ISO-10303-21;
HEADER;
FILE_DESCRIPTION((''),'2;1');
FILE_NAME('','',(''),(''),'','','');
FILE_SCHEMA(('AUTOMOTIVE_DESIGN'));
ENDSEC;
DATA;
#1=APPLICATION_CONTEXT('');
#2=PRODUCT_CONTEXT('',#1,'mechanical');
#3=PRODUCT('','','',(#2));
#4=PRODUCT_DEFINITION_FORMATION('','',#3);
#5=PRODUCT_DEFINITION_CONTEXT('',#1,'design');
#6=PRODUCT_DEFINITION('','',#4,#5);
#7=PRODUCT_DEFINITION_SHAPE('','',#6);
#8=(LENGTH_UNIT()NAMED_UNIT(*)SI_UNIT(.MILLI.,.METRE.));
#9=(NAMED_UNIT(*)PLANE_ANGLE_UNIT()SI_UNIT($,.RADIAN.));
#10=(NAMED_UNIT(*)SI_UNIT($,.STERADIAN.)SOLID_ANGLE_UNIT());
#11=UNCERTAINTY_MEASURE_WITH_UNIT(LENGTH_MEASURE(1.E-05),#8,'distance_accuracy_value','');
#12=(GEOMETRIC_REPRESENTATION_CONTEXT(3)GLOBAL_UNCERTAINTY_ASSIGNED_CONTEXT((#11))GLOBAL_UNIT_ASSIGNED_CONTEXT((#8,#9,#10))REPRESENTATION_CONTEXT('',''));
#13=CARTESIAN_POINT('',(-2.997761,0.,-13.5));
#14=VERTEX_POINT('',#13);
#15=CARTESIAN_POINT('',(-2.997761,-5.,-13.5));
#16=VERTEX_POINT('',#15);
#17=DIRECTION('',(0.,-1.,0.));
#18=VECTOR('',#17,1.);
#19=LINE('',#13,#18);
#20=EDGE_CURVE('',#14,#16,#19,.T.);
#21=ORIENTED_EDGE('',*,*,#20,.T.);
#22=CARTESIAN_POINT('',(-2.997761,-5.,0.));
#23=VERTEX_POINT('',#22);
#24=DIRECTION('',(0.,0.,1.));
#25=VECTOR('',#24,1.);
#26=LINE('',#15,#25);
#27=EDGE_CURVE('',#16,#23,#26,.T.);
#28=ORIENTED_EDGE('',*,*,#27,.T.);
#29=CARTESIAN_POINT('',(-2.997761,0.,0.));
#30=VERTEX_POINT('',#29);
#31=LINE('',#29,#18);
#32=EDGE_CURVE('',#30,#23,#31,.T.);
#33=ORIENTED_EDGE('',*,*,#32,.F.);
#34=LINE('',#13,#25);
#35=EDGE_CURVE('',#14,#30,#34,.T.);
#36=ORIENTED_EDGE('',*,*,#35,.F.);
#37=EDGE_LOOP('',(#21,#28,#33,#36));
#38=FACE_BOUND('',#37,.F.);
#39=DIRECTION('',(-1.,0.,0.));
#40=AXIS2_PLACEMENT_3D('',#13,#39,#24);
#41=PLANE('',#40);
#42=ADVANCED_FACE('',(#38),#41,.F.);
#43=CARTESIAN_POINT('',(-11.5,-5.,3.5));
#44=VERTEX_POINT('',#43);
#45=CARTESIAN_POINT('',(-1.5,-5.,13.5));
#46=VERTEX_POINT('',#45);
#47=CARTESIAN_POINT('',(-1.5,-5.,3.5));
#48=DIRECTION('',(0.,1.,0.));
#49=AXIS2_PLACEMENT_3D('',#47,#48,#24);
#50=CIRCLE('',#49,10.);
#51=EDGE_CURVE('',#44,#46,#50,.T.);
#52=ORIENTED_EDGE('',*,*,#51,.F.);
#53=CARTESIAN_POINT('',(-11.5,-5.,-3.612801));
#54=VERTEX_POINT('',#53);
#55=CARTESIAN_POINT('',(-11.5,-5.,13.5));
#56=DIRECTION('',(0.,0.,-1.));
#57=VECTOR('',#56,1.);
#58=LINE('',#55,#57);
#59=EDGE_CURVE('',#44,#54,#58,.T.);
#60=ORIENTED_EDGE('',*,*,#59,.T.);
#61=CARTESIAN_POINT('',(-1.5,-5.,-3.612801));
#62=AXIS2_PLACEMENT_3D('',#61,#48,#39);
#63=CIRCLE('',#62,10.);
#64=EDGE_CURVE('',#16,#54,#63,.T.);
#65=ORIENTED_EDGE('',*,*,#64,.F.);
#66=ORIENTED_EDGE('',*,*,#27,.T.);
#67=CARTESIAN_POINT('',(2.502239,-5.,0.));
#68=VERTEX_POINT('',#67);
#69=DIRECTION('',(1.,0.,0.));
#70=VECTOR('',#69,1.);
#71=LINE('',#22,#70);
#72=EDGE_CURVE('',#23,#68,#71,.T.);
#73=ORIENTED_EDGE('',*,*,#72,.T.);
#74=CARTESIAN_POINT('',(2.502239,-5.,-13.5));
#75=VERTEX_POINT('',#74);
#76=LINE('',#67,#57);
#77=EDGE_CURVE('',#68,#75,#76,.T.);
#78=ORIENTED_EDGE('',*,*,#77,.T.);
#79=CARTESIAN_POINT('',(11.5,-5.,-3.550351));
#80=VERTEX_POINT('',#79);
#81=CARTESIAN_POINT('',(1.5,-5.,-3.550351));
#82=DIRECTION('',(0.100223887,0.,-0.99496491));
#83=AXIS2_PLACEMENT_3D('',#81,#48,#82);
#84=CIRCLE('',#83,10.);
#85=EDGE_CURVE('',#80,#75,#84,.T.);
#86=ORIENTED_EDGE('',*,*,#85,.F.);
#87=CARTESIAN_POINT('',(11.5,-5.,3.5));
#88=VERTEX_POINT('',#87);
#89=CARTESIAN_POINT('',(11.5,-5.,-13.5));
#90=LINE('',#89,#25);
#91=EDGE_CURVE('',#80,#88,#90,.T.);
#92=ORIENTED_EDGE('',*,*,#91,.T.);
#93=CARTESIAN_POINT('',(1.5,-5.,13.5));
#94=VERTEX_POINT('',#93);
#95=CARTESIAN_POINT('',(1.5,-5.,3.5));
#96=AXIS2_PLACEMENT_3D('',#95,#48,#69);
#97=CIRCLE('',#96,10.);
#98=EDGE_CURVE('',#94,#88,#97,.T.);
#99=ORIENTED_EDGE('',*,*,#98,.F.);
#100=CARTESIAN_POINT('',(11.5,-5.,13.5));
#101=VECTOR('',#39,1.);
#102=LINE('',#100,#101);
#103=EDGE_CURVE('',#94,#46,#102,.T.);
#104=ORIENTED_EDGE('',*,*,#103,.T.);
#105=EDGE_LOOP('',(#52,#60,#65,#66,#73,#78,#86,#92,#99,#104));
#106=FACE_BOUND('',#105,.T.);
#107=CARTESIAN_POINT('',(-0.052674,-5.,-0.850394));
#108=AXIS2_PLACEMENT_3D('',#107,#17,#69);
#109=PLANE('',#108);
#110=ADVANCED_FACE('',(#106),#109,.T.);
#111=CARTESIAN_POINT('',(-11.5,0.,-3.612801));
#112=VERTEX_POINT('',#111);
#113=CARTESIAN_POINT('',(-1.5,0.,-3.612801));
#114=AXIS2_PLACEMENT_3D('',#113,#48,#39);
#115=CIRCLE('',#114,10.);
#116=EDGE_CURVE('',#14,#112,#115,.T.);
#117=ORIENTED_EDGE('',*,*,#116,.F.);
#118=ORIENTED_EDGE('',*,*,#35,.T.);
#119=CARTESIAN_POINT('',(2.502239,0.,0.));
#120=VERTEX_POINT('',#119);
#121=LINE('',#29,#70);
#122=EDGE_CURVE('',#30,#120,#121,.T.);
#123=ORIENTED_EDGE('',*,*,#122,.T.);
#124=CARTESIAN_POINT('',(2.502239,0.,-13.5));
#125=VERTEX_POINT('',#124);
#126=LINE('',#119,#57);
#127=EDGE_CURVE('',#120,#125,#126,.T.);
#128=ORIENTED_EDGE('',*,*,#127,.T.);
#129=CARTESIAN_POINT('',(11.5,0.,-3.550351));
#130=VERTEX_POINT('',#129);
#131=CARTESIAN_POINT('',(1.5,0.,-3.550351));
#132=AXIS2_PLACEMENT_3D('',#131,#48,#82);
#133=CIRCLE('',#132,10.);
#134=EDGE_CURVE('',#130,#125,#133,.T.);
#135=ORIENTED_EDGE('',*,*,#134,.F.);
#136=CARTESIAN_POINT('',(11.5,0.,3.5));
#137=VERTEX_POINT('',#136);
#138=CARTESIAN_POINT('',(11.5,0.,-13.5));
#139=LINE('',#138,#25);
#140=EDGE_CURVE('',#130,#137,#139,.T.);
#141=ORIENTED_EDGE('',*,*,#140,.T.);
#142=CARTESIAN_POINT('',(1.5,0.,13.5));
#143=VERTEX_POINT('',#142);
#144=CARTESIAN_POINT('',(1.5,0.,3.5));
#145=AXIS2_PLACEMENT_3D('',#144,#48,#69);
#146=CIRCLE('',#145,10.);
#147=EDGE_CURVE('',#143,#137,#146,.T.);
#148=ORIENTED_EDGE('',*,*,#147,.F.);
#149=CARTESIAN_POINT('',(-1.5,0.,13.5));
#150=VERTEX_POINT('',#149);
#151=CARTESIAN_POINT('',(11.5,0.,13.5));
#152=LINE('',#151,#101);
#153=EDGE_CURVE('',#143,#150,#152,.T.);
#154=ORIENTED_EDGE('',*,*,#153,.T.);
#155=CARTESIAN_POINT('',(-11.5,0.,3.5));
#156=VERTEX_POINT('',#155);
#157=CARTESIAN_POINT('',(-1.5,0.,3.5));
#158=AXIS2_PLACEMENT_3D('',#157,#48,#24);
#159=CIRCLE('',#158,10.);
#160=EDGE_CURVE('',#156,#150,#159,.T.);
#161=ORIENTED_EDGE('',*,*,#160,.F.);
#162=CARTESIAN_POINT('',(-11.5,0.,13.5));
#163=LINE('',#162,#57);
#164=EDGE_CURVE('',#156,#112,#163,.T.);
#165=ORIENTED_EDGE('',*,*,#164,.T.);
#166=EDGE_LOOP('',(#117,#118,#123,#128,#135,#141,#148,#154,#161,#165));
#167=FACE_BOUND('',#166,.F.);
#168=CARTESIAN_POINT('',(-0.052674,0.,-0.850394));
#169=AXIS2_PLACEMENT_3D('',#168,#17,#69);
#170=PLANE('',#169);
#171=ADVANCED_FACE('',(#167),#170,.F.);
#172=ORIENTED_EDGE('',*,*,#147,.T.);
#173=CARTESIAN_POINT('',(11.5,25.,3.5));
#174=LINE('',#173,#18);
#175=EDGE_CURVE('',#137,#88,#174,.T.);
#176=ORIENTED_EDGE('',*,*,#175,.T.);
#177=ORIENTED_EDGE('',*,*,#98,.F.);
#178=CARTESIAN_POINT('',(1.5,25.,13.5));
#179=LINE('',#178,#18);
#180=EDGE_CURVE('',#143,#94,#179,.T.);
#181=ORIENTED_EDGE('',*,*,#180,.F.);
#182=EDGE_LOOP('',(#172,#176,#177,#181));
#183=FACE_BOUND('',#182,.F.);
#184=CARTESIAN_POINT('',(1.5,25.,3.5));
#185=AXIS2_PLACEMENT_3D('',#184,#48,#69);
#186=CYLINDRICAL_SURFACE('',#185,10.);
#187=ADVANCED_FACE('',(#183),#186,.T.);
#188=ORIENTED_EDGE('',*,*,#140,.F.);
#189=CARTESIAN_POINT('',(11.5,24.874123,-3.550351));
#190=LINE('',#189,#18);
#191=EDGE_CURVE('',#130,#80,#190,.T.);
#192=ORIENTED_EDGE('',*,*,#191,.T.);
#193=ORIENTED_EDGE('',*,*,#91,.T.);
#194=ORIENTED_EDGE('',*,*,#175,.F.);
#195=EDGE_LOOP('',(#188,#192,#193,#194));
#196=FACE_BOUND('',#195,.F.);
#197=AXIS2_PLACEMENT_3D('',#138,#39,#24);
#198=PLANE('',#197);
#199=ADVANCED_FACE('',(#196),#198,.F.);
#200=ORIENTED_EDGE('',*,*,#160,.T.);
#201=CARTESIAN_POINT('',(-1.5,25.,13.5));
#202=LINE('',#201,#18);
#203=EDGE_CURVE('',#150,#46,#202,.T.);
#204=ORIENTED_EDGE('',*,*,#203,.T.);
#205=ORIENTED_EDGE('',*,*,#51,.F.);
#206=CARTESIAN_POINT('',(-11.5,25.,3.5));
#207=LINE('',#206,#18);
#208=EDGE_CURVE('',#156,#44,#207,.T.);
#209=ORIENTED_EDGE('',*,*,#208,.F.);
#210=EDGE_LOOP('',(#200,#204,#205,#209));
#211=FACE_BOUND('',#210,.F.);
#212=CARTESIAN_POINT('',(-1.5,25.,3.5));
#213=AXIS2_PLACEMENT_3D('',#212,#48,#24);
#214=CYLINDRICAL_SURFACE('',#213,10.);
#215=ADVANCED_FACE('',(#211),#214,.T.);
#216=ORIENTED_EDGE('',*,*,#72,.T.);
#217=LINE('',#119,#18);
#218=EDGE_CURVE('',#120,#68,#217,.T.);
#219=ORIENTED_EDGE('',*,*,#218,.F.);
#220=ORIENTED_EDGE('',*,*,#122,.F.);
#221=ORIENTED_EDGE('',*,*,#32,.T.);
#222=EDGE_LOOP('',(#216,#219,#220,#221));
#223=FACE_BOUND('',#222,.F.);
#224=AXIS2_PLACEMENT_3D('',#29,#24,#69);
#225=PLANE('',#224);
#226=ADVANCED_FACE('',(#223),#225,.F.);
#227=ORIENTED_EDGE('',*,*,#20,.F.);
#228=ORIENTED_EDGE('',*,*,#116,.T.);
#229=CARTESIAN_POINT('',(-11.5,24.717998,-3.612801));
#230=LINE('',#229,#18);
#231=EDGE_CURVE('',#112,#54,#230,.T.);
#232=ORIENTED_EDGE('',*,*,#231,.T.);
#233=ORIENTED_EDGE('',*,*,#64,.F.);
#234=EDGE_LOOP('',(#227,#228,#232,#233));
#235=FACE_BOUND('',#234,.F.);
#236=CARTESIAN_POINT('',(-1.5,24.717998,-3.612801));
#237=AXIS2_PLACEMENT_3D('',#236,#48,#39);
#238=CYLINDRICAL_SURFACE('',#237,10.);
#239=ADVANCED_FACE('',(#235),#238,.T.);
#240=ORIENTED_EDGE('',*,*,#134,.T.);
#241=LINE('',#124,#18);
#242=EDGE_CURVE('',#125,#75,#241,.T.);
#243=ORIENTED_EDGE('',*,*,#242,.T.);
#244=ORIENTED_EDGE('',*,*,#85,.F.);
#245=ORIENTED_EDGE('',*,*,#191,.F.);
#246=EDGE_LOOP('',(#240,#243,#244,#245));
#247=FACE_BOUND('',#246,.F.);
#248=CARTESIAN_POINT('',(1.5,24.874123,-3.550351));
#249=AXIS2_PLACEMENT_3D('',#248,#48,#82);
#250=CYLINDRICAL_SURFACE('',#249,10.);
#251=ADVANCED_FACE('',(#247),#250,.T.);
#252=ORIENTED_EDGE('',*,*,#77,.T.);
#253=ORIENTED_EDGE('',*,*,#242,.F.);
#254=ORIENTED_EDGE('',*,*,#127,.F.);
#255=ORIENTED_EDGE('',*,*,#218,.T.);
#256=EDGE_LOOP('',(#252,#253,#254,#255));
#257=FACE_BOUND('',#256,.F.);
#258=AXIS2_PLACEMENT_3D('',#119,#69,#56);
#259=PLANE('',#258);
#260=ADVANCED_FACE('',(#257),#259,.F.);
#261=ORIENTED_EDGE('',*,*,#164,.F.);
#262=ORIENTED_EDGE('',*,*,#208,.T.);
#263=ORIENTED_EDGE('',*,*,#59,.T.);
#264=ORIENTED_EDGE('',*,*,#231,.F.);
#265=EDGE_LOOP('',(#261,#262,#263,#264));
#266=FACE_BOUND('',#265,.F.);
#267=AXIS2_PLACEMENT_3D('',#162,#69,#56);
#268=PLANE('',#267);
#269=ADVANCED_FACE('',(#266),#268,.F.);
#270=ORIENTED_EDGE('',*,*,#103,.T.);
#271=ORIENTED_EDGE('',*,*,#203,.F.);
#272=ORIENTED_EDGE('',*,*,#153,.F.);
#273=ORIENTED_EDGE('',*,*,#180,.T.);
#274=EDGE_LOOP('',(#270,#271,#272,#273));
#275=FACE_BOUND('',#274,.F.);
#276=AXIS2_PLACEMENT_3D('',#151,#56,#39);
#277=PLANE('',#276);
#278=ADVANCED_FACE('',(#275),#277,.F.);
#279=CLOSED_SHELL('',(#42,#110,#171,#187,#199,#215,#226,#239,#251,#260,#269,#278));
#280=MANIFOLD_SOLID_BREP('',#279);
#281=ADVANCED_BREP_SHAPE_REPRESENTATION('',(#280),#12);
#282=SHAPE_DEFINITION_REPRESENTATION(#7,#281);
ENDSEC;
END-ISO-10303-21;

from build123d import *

# Parameters (mm, degrees)
F1_DEPTH    = 5
F2_T1_DEPTH = 55
F2_T3_DEPTH = 54.7482455069
F2_T5_DEPTH = 54.435996907


# Not quite as in the source:
# - a fillet or chamfer that OpenCascade refuses, or shapes differently, is made with other operations: its cross-section is extruded or revolved along the edge and cut away or added


with BuildPart() as f1:
    # F0 (on Front) → F1 (new body)
    with BuildSketch(Plane.XZ):
        Polygon((2.5022388734, -13.5), (11.5, -13.5), (11.5, 13.5), (-11.5, 13.5), (-11.5, -13.5), (-2.9977611266, -13.5), (-2.9977611266, 0), (2.5022388734, 0), align=None)
    extrude(amount=F1_DEPTH)

    # F2: fillet of radius 10 on 4 edges, made by hand

    # F2_s2 → F2_t1 (cut)
    with BuildSketch(Plane.XZ.offset(-25)):
        with BuildLine():
            ThreePointArc((-1.5, 13.5), (-8.5710678119, 10.5710678119), (-11.5, 3.5))
            Line((-11.5, 3.5), (-11.5, 13.5))
            Line((-11.5, 13.5), (-1.5, 13.5))
        make_face()
        with BuildLine():
            ThreePointArc((11.5, 3.5), (8.5710678119, 10.5710678119), (1.5, 13.5))
            Line((1.5, 13.5), (11.5, 13.5))
            Line((11.5, 13.5), (11.5, 3.5))
        make_face()
    extrude(amount=F2_T1_DEPTH, mode=Mode.SUBTRACT)

    # F2_s4 → F2_t3 (cut)
    with BuildSketch(Plane.XZ.offset(-24.8741227535)):
        with BuildLine():
            ThreePointArc((2.5022388734, -13.5), (8.9169531728, -10.2577204004), (11.5, -3.5503508986))
            Line((11.5, -3.5503508986), (11.5, -13.5))
            Line((11.5, -13.5), (2.5022388734, -13.5))
        make_face()
    extrude(amount=F2_T3_DEPTH, mode=Mode.SUBTRACT)

    # F2_s6 → F2_t5 (cut)
    with BuildSketch(Plane.XZ.offset(-24.7179984535)):
        with BuildLine():
            ThreePointArc((-11.5, -3.6128006186), (-9.0821372734, -10.132861536), (-2.9977611266, -13.5))
            Line((-2.9977611266, -13.5), (-11.5, -13.5))
            Line((-11.5, -13.5), (-11.5, -3.6128006186))
        make_face()
    extrude(amount=F2_T5_DEPTH, mode=Mode.SUBTRACT)


solid = f1.part
